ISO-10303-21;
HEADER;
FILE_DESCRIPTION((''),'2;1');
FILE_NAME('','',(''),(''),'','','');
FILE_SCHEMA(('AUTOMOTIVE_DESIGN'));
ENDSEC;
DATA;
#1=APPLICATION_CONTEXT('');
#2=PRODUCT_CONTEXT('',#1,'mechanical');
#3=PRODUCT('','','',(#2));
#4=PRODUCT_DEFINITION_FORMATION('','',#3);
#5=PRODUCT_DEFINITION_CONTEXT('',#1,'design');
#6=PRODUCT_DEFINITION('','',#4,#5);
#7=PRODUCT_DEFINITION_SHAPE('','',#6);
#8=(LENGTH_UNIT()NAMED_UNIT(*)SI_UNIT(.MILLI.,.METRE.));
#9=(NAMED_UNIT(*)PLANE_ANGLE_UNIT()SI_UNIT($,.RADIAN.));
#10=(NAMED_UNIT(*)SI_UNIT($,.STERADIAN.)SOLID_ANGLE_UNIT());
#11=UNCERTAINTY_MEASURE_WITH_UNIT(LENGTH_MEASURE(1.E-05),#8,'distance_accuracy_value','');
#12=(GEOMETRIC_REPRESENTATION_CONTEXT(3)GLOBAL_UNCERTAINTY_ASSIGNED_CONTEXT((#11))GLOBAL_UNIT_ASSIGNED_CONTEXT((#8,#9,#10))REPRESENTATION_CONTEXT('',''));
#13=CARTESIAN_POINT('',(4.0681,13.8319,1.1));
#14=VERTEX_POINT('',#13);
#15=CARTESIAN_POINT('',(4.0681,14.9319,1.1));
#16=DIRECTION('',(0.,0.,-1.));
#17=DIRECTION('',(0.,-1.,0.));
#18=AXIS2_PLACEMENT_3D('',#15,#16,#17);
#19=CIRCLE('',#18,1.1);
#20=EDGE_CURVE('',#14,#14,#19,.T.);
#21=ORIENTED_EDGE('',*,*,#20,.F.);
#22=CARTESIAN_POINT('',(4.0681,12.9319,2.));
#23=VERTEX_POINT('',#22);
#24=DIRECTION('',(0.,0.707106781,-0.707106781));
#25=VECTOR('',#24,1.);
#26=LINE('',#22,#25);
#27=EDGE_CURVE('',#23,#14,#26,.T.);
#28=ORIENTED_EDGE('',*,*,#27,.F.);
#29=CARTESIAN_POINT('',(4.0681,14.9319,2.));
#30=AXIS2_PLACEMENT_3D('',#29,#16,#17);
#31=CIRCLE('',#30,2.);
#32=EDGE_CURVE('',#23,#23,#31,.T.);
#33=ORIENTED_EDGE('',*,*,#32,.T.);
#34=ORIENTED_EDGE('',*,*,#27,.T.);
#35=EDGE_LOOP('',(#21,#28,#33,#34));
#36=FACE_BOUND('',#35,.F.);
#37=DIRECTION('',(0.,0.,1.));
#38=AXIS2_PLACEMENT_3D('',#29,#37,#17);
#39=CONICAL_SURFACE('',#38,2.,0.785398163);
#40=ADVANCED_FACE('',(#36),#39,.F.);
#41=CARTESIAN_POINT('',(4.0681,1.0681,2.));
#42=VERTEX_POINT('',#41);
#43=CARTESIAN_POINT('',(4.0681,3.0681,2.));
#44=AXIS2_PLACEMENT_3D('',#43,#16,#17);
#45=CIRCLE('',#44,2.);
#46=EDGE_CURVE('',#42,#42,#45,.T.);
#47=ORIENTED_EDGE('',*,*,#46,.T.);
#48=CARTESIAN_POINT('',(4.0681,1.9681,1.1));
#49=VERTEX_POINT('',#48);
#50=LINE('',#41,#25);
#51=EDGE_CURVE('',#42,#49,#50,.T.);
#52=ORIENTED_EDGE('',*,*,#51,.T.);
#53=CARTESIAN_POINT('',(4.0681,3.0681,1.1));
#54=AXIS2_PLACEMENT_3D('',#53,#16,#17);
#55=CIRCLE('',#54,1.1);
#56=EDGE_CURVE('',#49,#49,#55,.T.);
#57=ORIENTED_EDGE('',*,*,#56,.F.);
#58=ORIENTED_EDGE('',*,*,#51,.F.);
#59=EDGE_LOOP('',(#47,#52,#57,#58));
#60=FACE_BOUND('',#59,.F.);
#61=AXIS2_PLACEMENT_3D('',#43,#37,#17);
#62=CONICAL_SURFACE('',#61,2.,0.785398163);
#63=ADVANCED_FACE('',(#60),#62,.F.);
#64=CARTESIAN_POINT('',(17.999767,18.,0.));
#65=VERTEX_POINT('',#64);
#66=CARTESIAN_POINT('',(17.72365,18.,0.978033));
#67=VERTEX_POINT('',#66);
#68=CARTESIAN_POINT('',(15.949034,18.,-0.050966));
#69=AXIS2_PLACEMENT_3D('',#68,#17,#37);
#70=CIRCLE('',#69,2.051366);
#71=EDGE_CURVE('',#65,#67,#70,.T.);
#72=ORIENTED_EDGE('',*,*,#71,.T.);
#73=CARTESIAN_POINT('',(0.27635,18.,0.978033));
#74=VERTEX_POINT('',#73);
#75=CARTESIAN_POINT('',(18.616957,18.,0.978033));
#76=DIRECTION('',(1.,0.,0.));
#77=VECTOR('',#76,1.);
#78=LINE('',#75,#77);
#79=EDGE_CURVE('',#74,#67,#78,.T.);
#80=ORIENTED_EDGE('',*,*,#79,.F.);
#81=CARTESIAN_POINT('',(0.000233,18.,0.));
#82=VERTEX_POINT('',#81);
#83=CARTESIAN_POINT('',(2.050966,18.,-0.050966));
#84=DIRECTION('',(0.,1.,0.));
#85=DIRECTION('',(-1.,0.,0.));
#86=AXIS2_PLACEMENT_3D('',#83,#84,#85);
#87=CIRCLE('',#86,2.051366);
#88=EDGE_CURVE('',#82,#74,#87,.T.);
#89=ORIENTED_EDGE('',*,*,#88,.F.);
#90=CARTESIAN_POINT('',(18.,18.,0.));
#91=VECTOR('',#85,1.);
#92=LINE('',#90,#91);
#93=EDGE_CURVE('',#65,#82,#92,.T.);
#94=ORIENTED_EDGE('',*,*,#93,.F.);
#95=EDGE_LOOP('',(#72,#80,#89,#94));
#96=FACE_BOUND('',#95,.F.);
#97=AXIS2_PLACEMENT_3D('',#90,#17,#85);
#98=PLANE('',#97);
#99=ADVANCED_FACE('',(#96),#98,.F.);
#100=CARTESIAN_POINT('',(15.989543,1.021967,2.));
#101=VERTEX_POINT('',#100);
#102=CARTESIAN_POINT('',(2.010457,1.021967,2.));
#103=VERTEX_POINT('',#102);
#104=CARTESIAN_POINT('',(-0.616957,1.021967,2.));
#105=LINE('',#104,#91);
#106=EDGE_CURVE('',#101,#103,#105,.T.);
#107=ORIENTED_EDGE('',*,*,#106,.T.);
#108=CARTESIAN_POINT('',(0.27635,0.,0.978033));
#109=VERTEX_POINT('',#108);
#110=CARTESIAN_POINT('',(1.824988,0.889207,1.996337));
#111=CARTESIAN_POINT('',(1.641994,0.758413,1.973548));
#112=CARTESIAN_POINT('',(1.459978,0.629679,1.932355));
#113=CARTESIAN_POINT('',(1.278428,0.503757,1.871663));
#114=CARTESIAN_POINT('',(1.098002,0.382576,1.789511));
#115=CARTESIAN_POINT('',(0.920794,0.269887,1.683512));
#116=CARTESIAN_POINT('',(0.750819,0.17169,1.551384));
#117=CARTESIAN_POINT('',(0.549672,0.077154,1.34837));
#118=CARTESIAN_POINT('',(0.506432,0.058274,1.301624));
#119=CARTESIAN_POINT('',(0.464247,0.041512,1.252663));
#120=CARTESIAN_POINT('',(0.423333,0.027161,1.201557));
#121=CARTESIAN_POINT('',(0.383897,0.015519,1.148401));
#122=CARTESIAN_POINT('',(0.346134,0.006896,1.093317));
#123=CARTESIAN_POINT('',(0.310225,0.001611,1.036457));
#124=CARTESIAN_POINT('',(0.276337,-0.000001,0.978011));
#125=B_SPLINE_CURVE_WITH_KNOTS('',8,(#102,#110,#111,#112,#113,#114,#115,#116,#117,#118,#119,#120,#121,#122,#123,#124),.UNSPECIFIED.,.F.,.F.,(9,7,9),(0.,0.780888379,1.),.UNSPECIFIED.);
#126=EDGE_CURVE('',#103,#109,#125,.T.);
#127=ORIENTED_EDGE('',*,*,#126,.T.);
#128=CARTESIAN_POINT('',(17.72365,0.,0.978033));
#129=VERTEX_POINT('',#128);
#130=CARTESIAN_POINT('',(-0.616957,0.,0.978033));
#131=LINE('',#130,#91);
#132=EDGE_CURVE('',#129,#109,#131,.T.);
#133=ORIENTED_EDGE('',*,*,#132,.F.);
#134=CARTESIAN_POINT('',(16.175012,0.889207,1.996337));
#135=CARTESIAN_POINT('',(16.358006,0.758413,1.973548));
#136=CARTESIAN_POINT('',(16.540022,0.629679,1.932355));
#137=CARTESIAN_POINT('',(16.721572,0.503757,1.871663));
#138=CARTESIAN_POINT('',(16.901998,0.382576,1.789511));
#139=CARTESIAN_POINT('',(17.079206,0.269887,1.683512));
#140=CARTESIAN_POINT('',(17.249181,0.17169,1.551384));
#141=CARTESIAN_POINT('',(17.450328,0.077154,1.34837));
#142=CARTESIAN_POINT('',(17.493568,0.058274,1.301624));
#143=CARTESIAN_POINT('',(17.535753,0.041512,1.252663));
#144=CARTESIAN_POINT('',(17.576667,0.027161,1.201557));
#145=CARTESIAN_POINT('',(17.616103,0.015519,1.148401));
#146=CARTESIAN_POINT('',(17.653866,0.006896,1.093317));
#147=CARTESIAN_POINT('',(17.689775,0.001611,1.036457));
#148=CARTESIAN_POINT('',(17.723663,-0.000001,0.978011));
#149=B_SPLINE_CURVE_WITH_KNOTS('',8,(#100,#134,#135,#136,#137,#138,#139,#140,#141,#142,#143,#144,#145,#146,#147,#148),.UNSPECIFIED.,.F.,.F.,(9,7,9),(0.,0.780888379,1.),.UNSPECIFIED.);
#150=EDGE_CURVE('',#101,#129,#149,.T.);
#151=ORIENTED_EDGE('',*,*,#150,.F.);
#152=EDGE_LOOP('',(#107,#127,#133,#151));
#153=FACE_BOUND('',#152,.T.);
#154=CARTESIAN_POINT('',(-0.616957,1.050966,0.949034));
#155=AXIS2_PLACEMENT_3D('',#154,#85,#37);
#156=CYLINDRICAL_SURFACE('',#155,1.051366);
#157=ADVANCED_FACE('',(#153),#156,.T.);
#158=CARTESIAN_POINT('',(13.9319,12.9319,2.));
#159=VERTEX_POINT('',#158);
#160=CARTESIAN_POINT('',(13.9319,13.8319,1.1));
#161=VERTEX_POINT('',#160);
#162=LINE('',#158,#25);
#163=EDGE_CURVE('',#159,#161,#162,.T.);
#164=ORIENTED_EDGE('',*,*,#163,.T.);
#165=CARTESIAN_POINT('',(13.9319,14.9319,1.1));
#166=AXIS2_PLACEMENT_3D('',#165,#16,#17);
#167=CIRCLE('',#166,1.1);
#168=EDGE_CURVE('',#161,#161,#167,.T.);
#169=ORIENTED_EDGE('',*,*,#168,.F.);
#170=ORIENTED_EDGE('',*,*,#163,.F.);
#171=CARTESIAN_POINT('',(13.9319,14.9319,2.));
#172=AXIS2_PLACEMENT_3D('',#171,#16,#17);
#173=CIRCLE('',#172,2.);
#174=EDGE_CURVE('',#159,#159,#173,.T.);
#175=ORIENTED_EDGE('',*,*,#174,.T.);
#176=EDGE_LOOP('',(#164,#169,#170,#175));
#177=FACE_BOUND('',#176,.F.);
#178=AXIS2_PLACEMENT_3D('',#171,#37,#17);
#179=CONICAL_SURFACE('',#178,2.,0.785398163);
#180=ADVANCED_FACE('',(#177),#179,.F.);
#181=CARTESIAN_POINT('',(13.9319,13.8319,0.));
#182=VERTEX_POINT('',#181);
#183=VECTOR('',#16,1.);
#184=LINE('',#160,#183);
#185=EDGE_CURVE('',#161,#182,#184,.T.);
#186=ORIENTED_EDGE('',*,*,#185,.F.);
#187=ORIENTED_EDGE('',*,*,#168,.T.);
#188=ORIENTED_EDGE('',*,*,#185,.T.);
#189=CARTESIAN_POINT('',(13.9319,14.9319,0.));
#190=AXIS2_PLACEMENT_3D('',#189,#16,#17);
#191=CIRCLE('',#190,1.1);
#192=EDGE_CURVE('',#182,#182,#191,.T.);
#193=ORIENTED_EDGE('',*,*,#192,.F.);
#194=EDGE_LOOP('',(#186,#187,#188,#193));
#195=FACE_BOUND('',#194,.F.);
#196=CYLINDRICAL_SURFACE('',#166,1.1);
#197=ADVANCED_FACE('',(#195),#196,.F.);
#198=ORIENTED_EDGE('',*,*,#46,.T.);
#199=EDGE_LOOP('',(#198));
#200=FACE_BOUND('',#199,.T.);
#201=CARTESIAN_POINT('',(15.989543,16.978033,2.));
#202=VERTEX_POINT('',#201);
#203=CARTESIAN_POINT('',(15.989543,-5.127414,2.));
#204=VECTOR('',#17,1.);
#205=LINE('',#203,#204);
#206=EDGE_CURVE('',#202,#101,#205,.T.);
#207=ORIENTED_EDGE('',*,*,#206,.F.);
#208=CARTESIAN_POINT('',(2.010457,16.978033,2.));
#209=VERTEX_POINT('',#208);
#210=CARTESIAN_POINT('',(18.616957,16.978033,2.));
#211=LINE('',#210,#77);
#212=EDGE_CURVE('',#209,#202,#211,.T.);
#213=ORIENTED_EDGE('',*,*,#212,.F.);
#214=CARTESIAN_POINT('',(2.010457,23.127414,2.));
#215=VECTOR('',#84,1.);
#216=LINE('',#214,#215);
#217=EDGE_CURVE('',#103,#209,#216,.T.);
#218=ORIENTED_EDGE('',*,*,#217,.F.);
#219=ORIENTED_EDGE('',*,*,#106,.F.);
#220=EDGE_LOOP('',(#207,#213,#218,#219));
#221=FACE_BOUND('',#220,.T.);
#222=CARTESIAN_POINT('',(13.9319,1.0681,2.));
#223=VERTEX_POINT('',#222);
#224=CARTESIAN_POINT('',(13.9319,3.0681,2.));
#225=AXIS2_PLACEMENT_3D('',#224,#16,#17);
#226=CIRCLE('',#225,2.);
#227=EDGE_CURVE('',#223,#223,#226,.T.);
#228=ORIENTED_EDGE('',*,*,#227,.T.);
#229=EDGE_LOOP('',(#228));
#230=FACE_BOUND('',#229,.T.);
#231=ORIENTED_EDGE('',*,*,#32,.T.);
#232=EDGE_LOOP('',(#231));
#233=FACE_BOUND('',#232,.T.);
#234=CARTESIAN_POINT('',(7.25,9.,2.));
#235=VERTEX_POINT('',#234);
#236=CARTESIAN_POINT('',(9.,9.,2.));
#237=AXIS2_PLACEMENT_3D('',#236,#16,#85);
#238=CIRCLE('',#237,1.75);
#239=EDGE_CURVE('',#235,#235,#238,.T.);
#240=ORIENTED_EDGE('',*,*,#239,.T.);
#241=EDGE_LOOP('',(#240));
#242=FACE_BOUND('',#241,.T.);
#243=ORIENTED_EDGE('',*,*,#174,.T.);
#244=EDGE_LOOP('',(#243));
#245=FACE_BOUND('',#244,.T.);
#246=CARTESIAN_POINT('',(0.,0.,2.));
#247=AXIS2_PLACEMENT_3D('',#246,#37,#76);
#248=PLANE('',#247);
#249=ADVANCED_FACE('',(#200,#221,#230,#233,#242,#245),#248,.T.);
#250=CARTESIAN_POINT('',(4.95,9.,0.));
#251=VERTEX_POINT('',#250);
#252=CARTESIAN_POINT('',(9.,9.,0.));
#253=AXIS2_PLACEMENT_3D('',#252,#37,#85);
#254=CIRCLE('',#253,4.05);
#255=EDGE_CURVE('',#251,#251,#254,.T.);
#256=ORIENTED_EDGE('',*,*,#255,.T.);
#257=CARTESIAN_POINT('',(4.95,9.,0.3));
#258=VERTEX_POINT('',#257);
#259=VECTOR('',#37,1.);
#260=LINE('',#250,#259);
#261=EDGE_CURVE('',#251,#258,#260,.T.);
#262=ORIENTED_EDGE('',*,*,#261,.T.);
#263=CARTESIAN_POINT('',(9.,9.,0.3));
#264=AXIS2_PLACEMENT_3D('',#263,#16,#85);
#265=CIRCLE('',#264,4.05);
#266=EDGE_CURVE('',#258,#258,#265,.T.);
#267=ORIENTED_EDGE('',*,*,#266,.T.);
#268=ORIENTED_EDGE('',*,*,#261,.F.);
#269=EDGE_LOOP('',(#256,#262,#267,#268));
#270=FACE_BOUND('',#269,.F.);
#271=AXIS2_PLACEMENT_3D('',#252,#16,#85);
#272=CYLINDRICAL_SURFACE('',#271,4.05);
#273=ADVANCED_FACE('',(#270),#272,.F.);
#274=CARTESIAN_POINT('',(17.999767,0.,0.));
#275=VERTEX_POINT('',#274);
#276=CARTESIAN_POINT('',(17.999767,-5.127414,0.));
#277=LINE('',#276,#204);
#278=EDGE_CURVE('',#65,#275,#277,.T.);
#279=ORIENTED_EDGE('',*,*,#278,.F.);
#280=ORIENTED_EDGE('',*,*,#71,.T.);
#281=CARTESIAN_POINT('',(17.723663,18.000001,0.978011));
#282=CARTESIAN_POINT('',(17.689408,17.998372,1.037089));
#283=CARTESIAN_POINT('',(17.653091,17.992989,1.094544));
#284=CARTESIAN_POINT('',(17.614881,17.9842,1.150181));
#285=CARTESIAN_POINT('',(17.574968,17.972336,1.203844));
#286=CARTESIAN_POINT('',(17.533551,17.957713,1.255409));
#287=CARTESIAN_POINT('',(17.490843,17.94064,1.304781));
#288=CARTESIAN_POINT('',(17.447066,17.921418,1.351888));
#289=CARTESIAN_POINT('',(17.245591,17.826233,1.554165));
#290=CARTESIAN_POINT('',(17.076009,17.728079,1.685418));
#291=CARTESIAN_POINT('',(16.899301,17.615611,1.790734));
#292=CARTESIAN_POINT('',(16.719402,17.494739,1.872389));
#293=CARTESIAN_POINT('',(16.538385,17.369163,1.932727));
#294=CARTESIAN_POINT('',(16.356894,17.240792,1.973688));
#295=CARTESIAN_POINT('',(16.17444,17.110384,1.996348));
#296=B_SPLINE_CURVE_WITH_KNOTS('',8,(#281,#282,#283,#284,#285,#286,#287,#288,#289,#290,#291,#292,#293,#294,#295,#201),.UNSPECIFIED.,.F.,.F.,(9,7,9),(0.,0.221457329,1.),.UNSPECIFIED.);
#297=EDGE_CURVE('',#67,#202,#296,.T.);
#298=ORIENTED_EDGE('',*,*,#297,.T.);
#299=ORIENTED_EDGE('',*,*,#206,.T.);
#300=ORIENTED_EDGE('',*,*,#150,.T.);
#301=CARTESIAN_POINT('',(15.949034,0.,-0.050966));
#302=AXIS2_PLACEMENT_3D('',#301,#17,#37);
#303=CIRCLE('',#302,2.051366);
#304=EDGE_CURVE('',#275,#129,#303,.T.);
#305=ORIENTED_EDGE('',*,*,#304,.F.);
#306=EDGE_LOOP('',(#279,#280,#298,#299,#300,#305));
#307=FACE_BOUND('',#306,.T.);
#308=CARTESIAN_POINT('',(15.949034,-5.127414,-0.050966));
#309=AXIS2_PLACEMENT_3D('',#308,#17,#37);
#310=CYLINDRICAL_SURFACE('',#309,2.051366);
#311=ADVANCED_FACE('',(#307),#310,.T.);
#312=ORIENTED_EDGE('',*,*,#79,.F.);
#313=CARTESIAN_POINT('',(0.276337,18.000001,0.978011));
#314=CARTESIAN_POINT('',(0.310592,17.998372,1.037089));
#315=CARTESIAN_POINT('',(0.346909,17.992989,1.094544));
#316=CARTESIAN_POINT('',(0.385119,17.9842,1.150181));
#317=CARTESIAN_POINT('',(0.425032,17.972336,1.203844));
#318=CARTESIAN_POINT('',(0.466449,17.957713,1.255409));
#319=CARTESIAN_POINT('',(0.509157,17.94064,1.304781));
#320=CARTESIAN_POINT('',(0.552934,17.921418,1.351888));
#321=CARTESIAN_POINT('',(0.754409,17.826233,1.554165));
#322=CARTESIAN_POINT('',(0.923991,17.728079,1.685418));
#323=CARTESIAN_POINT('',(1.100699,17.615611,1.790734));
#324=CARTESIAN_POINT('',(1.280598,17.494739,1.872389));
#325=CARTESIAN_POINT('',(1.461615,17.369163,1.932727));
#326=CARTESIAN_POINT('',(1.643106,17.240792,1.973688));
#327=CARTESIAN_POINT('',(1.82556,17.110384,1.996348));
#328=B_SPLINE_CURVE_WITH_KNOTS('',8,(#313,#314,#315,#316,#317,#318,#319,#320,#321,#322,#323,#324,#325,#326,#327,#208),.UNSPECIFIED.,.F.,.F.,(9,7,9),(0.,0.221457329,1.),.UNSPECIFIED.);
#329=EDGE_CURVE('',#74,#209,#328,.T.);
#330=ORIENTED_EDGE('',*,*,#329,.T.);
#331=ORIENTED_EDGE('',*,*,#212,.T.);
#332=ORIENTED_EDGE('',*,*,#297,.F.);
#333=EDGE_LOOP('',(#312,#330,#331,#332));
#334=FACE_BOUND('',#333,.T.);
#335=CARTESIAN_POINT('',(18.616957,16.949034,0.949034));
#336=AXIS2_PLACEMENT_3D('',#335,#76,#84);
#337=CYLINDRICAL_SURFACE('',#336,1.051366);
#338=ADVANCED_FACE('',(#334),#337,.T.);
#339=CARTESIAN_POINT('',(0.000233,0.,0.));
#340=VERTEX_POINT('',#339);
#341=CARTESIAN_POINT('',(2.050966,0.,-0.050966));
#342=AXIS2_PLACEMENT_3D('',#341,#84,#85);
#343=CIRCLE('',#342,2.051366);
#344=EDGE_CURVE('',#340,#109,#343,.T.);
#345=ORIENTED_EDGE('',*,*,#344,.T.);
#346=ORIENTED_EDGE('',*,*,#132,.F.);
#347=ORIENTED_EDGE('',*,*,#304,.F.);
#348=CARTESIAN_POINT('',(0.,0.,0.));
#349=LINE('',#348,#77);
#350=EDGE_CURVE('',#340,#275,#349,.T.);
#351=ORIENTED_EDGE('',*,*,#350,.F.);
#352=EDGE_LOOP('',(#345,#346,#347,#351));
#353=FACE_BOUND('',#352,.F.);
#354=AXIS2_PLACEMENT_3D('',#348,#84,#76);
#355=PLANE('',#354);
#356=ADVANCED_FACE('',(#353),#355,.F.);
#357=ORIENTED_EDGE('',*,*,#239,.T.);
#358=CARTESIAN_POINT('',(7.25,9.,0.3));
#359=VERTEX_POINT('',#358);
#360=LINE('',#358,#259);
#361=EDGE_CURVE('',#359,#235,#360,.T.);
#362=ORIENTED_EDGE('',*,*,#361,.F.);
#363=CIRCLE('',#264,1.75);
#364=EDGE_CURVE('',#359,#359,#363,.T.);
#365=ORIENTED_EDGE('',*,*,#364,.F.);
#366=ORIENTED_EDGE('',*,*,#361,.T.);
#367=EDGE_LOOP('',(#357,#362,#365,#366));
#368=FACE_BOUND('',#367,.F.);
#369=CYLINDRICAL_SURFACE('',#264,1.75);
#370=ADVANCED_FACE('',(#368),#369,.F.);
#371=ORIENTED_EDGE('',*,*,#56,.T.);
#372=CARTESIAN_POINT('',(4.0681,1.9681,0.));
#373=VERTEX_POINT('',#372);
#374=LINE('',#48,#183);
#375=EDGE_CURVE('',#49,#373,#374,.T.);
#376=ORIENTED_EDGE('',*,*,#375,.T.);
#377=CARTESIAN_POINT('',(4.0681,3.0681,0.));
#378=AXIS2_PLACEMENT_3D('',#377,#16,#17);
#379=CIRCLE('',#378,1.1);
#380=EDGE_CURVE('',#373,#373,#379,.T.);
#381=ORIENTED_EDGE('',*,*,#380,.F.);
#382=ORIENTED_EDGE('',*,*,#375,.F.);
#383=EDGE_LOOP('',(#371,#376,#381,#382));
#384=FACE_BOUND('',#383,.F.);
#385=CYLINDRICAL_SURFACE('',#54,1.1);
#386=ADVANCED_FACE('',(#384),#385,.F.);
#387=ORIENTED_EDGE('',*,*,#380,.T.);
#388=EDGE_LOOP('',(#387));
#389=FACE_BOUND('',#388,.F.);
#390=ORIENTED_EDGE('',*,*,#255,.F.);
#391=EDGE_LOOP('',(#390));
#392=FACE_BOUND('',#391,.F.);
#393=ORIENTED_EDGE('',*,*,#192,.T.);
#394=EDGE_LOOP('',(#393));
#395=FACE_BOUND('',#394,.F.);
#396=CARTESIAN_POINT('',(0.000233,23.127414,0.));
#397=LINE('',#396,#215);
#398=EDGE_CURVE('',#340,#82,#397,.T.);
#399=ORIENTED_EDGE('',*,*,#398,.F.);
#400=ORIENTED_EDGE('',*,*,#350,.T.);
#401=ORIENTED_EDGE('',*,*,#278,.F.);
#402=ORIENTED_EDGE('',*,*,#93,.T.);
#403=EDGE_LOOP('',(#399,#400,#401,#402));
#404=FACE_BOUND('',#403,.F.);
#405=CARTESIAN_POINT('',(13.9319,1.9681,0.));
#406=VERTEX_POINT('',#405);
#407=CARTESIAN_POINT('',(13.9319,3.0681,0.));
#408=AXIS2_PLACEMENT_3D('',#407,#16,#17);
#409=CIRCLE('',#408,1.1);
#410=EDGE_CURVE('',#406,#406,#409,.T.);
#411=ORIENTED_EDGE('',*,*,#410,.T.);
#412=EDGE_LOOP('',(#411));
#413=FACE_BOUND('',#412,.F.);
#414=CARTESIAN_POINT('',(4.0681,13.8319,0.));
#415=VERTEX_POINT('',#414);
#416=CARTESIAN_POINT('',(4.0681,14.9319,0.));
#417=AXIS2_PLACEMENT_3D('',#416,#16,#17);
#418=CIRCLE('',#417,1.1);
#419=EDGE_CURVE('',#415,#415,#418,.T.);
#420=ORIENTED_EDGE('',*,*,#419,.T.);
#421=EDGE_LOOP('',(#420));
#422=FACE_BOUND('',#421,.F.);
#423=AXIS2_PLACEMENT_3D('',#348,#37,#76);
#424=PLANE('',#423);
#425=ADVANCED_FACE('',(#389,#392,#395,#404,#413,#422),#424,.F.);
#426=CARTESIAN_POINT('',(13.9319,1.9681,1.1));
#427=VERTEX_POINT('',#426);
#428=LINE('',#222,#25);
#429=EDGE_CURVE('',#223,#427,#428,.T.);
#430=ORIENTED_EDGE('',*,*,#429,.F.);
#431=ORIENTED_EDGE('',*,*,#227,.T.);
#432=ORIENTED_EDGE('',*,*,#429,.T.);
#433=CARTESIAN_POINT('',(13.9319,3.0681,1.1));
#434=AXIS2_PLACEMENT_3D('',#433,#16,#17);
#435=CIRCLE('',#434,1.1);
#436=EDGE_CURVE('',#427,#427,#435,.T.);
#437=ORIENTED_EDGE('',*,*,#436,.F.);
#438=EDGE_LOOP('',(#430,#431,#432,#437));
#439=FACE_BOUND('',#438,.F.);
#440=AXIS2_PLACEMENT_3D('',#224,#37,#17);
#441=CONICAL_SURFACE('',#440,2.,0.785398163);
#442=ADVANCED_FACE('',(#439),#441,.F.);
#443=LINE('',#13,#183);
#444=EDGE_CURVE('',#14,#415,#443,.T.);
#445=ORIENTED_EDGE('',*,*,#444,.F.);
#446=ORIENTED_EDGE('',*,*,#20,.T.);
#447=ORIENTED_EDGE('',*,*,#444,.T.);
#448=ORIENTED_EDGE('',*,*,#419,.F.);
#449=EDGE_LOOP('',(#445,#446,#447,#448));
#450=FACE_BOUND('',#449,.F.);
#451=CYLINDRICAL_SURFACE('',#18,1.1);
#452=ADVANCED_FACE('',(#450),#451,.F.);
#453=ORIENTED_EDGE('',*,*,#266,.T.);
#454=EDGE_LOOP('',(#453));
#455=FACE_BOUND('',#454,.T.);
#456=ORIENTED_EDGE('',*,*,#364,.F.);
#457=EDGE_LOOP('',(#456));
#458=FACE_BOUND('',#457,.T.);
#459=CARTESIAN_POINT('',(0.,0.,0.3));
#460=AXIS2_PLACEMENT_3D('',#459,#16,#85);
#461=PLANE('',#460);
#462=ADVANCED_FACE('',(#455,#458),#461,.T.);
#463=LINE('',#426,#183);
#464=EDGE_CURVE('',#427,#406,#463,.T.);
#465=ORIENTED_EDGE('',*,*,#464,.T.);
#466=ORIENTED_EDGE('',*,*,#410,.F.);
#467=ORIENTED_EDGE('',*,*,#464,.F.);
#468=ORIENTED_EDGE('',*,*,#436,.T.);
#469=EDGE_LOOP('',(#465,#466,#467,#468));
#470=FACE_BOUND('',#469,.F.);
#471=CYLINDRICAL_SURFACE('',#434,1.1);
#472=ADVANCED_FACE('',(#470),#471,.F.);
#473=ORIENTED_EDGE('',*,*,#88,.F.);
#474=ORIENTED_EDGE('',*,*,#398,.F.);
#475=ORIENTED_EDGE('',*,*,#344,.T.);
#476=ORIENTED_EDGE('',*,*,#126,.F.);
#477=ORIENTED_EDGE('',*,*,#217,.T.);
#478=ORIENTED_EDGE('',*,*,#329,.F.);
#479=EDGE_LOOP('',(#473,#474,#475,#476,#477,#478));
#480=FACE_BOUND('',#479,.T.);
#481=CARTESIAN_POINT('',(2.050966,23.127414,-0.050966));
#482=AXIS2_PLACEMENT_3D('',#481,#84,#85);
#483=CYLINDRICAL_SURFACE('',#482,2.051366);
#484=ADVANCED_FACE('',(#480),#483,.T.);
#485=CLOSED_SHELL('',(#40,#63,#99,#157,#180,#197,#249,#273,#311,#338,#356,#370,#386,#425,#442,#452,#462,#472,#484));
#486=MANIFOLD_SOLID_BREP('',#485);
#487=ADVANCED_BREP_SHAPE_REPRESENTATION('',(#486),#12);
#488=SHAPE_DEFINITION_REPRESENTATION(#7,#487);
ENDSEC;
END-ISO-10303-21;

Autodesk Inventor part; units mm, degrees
ref_plane "YZ Plane" through (0, 0, 0) normal (1, 0, 0) x (0, 1, 0)
ref_plane "XZ Plane" through (0, 0, 0) normal (0, 1, 0) x (-1, 0, 0)
ref_plane "XY Plane" through (0, 0, 0) normal (0, 0, 1) x (1, 0, 0)
sketch "Эскиз1" plane through (0, 0, 0) normal (0, 0, 1) x (1, 0, 0)
  line L0 (0, 0) -> (18, 0)
  line L1 (18, 0) -> (18, 18)
  line L2 (18, 18) -> (0, 18)
  line L3 (0, 18) -> (0, 0)
  dimension "d0" = 18
  dimension "d1" = 18
extrude "Выдавливание1" add sketch "Эскиз1" along normal blind 2
sketch "Эскиз4" plane through (0, 0, 0) normal (0, 0, -1) x (-1, 0, 0)
  circle A0 centre (-9, 9) radius 4.05
  line L0 (-18, 0) -> (-18, 18) projected
  line L1 (-18, 9) -> (0, 9)
  line L2 (0, 18) -> (0, 0) projected
  dimension "d14" = 8.1
extrude "Выдавливание3" cut sketch "Эскиз4" against normal blind 0.3
sketch "Эскиз5" plane through (0, 0, 2) normal (0, 0, 1) x (1, 0, 0)
  circle A0 centre (9, 9) radius 1.75 projected
  circle A1 centre (9, 9) radius 5.714 projected
  line L0 (0, 18) -> (0, 0) projected
  line L1 (6.1362, 11.8638) -> (0, 18)
  line L2 (18, 0) -> (18, 18) projected
  line L3 (11.8638, 11.8638) -> (18, 18)
  line L4 (0, 0) -> (18, 0) projected
  line L5 (0, 0) -> (6.1362, 6.1362)
  line L6 (18, 0) -> (11.8638, 6.1362)
  circle A2 centre (9, 9) radius 4.05 projected
  line L7 (3.0681, 14.9319) -> (4.0681, 14.9319)
  line L8 (3.0681, 3.0681) -> (4.0681, 3.0681)
  line L9 (14.9319, 3.0681) -> (13.9319, 3.0681)
  line L10 (14.9319, 14.9319) -> (13.9319, 14.9319)
  dimension "d24" = 1
hole "Отверстие2" at (4.0681, 14.9319, 2) at (4.0681, 3.0681, 2) at (13.9319, 14.9319, 2) at (13.9319, 3.0681, 2) direction (0, 0, -1) diameter 2.2 depth 5 countersink diameter 4 countersink angle 90
fillet "Сопряжение1" radius 1.05 2 edges at (9, 0, 2) (9, 18, 2)
fillet "Сопряжение1" radius 2.05 2 edges at (18, 9, 2) (0, 9, 2)
sketch "Эскиз6" plane through (9, 9, 0.3) normal (0, 0, -1) x (-1, 0, 0)
  circle A0 centre (0, 0) radius 1.75
  point P0 (9, -9)
  dimension "d27" = 3.5
extrude "Выдавливание4" cut sketch "Эскиз6" against normal through all
properties part number "Крышка поворотного кулака"
